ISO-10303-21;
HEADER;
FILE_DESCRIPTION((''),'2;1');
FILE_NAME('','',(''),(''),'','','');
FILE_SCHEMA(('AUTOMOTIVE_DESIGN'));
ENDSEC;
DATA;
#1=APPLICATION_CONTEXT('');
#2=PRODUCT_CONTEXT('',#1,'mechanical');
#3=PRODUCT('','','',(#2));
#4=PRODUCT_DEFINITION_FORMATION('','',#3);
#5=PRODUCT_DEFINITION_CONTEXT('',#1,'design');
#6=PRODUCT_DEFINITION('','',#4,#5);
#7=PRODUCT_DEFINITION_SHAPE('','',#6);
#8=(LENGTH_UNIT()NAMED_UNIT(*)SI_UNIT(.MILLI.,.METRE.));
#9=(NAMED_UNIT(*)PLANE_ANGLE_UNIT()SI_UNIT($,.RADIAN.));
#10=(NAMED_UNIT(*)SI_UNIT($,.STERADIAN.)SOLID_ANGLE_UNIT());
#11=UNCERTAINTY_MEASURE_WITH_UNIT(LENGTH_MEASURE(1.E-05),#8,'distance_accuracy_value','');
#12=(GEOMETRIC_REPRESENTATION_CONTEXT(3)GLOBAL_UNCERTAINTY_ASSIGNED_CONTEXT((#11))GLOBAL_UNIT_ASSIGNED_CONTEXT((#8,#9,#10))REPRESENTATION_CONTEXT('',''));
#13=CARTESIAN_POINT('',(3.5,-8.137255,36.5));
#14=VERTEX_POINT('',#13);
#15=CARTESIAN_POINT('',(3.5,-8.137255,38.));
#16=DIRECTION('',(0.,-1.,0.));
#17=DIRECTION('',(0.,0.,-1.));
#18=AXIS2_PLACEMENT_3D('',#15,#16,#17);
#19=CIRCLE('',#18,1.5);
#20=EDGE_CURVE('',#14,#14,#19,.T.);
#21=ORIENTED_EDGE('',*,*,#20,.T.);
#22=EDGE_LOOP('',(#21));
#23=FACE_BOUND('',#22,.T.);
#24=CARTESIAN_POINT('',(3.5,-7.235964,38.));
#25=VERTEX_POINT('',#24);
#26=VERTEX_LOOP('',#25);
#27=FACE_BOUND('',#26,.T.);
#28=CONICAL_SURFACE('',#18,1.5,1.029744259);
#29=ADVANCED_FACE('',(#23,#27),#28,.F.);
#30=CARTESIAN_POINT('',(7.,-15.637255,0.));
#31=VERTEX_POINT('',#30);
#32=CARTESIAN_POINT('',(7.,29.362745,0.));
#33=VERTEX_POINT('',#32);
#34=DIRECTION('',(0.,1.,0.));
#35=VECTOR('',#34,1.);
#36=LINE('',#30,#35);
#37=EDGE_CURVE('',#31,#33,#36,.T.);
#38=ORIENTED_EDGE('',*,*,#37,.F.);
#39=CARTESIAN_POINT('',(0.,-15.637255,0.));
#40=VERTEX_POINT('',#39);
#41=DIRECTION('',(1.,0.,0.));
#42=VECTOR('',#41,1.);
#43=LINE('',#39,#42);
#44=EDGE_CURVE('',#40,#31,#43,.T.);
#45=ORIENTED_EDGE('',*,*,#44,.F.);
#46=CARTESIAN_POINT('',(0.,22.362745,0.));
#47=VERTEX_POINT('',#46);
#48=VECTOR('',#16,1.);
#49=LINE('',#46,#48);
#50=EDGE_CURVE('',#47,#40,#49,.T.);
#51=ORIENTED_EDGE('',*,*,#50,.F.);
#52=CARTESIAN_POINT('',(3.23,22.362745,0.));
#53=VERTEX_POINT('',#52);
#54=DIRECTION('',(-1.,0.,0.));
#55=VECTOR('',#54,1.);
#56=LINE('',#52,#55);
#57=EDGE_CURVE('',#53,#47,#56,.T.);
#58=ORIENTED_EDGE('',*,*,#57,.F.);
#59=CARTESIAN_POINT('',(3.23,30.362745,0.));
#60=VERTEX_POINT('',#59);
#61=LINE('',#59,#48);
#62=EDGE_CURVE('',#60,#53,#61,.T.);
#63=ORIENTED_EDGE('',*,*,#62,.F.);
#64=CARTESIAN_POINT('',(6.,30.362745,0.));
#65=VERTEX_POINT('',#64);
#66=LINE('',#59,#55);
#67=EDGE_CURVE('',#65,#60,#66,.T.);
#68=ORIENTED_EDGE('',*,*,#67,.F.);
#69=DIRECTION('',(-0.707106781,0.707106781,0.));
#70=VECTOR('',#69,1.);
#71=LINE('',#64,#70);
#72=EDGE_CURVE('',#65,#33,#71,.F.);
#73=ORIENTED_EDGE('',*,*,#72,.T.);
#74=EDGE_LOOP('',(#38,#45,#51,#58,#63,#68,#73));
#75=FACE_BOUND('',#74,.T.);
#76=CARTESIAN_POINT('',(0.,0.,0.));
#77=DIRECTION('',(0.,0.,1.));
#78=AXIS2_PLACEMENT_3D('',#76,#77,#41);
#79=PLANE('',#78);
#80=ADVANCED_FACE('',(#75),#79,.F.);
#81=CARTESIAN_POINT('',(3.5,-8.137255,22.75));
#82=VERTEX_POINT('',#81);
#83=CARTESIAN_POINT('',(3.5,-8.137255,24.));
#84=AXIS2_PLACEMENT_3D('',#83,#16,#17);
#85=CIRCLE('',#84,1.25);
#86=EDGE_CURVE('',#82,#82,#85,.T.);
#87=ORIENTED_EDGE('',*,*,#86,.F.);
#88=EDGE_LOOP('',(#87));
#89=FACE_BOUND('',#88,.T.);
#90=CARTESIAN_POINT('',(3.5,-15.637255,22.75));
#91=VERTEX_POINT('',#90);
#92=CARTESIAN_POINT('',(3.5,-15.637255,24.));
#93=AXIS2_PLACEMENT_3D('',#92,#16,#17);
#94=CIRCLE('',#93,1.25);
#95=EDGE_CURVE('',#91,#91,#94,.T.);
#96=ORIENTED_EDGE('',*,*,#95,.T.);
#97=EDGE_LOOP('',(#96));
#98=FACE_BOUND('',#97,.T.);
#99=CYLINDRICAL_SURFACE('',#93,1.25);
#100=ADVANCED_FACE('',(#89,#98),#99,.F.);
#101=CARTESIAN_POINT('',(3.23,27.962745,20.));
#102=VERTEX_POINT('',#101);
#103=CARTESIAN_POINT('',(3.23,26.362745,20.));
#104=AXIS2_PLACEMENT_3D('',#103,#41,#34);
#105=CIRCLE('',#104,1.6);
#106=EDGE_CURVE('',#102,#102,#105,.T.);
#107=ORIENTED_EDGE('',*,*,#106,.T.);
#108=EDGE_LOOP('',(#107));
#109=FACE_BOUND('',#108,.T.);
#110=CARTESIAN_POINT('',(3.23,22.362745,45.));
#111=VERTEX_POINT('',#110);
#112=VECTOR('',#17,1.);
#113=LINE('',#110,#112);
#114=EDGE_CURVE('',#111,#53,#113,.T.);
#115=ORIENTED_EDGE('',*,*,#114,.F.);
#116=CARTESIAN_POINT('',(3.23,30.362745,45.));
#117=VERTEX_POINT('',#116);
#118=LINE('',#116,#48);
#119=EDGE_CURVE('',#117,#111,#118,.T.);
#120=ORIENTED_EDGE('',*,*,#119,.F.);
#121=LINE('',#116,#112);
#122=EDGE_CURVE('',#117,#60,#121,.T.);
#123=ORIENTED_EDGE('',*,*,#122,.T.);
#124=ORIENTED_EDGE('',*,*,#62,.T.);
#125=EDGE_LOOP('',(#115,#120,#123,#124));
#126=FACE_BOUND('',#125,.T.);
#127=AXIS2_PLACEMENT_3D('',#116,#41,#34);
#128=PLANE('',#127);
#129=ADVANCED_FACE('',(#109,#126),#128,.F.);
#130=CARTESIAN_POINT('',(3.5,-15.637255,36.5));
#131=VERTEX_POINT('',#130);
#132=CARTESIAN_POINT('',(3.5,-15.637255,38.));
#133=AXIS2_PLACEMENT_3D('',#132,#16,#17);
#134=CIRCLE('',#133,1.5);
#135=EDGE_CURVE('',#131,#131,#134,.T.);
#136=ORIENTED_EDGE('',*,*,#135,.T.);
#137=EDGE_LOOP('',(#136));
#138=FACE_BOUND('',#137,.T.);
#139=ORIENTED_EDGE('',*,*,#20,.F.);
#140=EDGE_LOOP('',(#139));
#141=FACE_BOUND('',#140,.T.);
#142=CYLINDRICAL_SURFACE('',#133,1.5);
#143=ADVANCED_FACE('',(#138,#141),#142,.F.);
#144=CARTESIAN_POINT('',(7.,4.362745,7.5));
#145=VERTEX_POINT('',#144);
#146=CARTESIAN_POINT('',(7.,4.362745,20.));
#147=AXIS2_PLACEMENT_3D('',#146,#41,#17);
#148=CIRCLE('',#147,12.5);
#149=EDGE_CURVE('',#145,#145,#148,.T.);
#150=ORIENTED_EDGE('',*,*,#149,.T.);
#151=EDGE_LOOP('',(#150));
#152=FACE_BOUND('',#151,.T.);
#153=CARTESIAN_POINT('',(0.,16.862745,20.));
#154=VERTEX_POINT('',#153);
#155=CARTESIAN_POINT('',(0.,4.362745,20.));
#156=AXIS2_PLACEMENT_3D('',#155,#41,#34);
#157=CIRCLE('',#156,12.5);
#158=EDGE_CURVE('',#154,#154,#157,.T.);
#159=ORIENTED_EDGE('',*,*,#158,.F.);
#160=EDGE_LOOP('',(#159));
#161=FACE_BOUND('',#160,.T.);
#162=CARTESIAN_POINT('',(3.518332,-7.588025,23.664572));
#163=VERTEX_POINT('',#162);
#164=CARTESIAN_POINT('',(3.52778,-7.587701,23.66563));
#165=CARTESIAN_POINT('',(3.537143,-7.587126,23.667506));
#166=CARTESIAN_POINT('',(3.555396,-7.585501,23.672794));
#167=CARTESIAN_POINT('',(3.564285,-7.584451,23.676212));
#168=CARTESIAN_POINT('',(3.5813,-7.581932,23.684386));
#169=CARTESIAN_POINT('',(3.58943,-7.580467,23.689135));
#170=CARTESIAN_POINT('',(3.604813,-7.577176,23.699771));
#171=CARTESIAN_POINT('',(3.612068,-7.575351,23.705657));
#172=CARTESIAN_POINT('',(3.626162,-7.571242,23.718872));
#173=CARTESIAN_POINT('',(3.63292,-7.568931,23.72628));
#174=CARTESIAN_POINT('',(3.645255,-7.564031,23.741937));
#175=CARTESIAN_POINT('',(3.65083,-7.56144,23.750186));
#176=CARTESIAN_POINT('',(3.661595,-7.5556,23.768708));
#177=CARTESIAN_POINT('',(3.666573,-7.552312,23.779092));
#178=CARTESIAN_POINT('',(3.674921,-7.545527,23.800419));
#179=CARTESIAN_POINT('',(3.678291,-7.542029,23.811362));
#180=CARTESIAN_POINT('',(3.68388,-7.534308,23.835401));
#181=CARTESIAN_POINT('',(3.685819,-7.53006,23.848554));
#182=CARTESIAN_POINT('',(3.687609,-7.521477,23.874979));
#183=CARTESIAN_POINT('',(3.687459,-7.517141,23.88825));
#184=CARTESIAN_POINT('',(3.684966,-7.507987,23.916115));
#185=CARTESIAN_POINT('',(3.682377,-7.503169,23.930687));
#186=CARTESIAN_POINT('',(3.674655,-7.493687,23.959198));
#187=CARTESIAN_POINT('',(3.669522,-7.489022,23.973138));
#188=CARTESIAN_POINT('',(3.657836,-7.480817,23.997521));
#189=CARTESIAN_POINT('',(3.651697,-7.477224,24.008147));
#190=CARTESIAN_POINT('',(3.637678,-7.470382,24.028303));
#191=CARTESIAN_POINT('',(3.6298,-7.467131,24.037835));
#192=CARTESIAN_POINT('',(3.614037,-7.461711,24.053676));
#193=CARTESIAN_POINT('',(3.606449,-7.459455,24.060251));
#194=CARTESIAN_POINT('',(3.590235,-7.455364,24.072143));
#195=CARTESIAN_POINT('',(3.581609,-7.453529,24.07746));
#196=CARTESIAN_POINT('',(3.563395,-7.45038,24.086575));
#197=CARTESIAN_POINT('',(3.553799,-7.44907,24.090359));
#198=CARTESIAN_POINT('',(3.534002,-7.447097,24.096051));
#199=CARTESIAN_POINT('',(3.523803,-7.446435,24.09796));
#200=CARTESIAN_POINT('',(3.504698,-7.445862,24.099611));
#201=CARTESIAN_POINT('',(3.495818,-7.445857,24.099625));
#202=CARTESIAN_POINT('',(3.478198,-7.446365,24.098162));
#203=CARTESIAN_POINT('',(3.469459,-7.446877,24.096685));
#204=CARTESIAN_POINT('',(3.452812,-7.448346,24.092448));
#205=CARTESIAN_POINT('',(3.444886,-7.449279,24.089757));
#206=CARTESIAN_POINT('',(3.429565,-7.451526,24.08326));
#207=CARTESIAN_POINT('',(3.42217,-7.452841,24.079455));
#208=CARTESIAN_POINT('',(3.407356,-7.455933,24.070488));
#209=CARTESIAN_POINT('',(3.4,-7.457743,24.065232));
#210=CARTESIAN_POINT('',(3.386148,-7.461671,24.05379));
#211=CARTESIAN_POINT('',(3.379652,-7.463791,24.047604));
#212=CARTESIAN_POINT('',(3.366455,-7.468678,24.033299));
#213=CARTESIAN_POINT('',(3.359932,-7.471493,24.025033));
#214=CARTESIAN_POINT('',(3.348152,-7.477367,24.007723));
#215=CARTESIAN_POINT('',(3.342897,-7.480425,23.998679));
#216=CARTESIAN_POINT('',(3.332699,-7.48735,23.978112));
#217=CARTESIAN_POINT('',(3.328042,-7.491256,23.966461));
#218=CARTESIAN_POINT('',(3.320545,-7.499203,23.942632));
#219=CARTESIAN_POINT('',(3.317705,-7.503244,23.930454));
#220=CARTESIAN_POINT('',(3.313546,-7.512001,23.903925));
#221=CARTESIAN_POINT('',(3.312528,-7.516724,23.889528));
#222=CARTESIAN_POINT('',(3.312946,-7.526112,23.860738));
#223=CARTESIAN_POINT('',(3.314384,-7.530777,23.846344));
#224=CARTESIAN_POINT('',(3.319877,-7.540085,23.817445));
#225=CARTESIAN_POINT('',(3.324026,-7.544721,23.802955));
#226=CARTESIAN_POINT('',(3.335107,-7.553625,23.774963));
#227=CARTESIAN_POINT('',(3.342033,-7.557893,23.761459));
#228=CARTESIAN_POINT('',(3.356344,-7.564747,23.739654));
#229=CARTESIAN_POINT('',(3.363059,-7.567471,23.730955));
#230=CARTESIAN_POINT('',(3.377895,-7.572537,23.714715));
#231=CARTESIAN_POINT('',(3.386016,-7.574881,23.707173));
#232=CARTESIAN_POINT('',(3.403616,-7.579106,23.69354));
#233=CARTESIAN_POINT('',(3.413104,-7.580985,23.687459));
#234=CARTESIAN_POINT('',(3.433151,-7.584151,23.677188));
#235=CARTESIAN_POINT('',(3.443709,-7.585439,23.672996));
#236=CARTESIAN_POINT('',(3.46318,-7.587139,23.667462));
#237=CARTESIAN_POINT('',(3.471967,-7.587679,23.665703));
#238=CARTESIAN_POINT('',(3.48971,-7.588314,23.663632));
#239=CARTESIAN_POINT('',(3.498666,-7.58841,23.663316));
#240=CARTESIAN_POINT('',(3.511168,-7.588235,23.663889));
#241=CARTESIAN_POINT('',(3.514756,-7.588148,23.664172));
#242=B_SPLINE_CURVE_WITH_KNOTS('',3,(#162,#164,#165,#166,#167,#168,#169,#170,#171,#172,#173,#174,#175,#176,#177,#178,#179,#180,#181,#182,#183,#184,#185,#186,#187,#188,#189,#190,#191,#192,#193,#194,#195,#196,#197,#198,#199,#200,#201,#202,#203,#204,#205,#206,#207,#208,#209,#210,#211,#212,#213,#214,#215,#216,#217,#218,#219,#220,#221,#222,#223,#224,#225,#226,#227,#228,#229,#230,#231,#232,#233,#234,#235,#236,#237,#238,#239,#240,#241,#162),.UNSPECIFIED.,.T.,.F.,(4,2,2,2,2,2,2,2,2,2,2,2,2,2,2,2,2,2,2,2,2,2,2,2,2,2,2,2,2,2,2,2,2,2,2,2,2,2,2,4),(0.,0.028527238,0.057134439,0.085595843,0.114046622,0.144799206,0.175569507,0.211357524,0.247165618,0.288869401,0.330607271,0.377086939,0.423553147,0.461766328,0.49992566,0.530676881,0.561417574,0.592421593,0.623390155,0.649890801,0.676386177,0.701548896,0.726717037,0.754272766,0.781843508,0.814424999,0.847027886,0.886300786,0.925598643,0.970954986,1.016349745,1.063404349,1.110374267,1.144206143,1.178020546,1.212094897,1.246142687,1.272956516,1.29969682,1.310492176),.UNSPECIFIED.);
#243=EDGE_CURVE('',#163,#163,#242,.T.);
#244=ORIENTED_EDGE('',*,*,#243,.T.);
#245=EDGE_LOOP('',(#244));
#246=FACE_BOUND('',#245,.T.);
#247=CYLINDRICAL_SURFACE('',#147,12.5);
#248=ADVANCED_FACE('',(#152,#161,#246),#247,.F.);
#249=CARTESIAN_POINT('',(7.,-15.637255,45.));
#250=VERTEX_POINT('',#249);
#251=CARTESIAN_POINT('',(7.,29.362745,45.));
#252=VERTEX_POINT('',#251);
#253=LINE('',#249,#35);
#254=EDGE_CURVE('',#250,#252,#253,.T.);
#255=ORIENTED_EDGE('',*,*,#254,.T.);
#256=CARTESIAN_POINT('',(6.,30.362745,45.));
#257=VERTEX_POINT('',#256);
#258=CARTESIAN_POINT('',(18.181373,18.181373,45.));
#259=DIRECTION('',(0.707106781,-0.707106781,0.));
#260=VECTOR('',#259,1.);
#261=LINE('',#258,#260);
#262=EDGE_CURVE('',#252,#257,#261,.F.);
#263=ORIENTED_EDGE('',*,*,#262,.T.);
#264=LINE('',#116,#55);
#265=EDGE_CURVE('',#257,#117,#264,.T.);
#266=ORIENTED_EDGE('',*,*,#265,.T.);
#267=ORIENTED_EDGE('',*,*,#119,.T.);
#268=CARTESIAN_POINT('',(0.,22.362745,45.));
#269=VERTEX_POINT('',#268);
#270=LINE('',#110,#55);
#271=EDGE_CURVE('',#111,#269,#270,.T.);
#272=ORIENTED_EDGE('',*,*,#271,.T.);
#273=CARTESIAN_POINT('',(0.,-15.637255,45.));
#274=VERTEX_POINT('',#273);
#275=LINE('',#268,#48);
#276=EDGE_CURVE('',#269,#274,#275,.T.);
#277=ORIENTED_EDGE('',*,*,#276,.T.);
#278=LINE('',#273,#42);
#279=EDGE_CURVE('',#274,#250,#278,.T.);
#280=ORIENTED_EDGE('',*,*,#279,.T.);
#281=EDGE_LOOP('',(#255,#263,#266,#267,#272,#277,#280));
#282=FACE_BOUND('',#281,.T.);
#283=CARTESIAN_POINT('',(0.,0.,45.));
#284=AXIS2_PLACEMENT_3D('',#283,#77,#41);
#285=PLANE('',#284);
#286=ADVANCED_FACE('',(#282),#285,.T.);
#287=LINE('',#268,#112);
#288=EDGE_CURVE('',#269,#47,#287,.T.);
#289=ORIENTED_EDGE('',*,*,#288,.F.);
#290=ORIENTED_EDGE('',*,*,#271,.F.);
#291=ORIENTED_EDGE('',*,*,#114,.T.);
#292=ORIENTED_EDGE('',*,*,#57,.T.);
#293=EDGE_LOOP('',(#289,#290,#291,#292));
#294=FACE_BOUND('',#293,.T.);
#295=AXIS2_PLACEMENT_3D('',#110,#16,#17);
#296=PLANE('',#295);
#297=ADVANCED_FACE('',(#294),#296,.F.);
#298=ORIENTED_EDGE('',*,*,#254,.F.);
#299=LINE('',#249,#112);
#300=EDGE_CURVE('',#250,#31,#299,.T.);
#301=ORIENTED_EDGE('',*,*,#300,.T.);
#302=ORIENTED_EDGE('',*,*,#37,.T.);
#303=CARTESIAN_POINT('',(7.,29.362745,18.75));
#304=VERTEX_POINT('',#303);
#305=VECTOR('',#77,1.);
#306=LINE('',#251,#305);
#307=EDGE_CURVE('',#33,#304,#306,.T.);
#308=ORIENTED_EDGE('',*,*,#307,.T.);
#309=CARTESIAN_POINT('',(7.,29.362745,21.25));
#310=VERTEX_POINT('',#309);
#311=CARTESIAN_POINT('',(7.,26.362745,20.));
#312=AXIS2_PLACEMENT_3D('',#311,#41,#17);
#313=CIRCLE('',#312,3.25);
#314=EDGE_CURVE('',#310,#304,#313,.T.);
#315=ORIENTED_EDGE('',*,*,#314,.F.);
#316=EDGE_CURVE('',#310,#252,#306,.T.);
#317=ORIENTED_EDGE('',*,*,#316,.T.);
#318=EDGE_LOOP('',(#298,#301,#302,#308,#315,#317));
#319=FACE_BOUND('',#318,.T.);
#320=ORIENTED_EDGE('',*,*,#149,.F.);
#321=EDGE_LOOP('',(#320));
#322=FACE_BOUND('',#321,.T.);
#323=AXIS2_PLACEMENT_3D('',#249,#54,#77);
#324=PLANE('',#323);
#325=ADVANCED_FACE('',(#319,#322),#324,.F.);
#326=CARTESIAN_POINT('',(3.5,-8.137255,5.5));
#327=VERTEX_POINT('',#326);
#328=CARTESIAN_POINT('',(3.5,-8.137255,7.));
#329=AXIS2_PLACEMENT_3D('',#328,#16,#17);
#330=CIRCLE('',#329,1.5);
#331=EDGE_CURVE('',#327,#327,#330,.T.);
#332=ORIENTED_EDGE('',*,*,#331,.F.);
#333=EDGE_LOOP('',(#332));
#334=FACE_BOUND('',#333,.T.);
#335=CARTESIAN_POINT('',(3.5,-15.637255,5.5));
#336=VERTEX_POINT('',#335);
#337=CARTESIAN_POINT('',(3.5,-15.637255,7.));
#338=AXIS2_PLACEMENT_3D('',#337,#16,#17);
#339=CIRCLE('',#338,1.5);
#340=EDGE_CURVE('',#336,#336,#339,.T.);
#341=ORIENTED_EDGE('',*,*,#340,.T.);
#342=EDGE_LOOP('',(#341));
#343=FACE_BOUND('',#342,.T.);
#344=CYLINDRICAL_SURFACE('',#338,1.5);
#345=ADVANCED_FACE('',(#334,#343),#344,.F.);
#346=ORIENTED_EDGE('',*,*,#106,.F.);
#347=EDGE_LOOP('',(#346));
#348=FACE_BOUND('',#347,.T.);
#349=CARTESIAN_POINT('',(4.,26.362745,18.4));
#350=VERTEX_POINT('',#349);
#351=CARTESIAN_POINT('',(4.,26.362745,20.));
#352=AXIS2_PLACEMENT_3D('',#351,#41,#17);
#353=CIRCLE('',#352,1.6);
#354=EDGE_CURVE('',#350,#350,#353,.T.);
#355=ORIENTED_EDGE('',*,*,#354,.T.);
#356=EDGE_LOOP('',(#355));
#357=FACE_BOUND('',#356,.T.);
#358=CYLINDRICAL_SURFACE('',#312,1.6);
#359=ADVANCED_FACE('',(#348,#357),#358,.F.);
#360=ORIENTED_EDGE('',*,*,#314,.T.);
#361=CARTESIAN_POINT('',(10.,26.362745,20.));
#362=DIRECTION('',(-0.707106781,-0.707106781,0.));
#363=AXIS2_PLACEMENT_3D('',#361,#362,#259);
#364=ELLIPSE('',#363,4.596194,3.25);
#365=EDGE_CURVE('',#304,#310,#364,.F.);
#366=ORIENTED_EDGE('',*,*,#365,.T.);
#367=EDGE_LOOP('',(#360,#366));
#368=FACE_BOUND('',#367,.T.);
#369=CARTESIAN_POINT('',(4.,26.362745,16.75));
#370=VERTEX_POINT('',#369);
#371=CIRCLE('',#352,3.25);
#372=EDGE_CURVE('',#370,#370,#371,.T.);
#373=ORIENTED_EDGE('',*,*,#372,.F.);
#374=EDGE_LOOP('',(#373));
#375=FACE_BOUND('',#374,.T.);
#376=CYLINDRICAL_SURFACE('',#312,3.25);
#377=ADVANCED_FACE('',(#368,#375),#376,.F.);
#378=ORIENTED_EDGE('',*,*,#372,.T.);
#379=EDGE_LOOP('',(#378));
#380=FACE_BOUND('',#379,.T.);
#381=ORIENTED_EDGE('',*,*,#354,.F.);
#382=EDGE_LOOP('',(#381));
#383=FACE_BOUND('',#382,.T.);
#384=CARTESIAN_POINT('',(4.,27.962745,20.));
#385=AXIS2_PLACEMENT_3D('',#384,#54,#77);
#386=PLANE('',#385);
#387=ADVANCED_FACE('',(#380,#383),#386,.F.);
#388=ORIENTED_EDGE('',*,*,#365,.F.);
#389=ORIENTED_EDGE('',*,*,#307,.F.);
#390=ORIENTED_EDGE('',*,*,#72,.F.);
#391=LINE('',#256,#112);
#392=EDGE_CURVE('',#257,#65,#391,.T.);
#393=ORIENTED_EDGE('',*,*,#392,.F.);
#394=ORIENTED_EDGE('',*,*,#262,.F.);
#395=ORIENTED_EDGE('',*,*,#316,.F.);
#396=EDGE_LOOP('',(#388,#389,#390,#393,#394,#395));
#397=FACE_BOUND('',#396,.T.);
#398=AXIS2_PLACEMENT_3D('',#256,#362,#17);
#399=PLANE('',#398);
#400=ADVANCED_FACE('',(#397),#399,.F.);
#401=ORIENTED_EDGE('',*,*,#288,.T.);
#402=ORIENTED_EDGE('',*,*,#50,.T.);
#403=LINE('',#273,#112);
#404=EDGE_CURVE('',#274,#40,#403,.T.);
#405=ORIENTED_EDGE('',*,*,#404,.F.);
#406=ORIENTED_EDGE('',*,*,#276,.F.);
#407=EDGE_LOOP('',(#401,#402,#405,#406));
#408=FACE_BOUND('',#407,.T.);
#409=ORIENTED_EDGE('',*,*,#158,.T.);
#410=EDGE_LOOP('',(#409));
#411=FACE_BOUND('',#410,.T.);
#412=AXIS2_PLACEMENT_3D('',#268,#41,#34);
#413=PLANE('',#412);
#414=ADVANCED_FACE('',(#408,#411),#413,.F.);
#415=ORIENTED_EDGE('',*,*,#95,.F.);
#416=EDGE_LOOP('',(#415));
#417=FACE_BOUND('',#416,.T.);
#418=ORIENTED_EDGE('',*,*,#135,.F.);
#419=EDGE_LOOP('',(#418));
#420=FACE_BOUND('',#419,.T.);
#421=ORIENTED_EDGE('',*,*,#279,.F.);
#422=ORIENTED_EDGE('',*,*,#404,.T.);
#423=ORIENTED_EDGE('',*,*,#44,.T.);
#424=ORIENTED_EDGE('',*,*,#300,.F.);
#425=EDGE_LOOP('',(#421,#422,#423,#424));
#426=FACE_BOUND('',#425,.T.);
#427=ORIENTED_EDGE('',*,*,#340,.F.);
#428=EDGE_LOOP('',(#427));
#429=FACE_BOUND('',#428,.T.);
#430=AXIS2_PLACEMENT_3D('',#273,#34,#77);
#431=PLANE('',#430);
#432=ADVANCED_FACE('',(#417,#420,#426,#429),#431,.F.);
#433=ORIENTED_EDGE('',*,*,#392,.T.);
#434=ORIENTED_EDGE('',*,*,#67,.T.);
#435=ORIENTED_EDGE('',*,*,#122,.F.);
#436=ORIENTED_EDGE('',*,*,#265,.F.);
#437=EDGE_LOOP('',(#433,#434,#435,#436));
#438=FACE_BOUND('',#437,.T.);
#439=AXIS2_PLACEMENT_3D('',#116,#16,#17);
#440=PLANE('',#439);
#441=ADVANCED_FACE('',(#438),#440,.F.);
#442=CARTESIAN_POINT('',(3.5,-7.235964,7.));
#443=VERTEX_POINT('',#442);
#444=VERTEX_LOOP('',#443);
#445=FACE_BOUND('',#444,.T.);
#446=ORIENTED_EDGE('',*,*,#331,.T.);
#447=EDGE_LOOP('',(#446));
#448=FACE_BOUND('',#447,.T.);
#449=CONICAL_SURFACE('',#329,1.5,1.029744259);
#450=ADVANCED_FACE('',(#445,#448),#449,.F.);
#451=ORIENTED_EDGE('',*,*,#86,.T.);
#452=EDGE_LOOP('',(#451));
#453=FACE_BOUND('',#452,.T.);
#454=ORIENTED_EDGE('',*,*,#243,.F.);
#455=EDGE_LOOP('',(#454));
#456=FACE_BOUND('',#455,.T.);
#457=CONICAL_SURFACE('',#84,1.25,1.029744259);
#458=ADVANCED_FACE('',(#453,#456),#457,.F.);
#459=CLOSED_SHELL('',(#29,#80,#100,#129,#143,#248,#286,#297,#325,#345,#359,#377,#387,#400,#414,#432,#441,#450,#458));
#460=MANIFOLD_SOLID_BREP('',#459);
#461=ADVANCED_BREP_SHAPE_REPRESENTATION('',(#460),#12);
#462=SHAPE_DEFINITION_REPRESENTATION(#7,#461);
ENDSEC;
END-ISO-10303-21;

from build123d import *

# Parameters (mm, degrees)
BOSS_EXTRUDE1_DEPTH            = 45
CBORE_FOR_M3_SHCS1_D           = 3.2
CBORE_FOR_M3_SHCS1_CBORE_D     = 6.5
CBORE_FOR_M3_SHCS1_CBORE_DEPTH = 3
F_25_0_25_DIAMETER_HOLE1_D     = 25
CHAMFER1_SIZE                  = 1
M3X0_5_TAPPED_HOLE1_D          = 2.5
M3X0_5_TAPPED_HOLE1_DEPTH      = 7.5
M3X0_5_TAPPED_HOLE1_TIP        = 0.751075774
F_3_0MM_DOWEL_HOLE1_D          = 3
F_3_0MM_DOWEL_HOLE1_DEPTH      = 7.5
F_3_0MM_DOWEL_HOLE1_TIP        = 0.901290929


with BuildPart() as part:
    # Sketch1 → Boss-Extrude1 (new body)
    with BuildSketch(Plane.XY):
        Polygon((3.23, 30.362745098), (3.23, 22.362745098), (0, 22.362745098), (0, -15.637254902), (7, -15.637254902), (7, 30.362745098), align=None)
    extrude(amount=BOSS_EXTRUDE1_DEPTH)

    # CBORE for M3 SHCS1 (through all)
    with Locations(Plane(origin=(7, 0, 0), x_dir=(0, 0, -1), z_dir=(1, 0, 0))):
        with Locations((-20, 26.362745098)):
            CounterBoreHole(CBORE_FOR_M3_SHCS1_D / 2, CBORE_FOR_M3_SHCS1_CBORE_D / 2, CBORE_FOR_M3_SHCS1_CBORE_DEPTH)

    # Ø25.0 (25) Diameter Hole1 (through all)
    with Locations(Plane(origin=(7, 0, 0), x_dir=(0, 0, -1), z_dir=(1, 0, 0))):
        with Locations((-20, 4.362745098)):
            Hole(F_25_0_25_DIAMETER_HOLE1_D / 2)

    # Chamfer1
    # the kernel refuses this chamfer: 1 mm, written as the material it takes off along each edge
    with BuildSketch(Plane(origin=(7, 30.362745098, -2.571682988), x_dir=(-0.9996219169112968, 0.027495876610585623, 0), z_dir=(0, 0, 1))) as chamfer1_piece_1:
        Polygon((CHAMFER1_SIZE * 0.999621916911, CHAMFER1_SIZE * 0.0274958766106), (-CHAMFER1_SIZE * 0.0274958766106, CHAMFER1_SIZE * 0.999621916911), (0, 0), align=None)
    extrude(amount=50.143365976, mode=Mode.SUBTRACT)

    # M3x0.5 Tapped Hole1
    with Locations(Plane(origin=(0, -15.637254902, 0), x_dir=(-1, 0, 0), z_dir=(0, -1, 0))):
        with Locations((-3.5, -24)):
            Hole(M3X0_5_TAPPED_HOLE1_D / 2, depth=M3X0_5_TAPPED_HOLE1_DEPTH)
            with Locations((0, 0, -(M3X0_5_TAPPED_HOLE1_DEPTH + M3X0_5_TAPPED_HOLE1_TIP / 2))):  # 118° drill point
                Cone(0, M3X0_5_TAPPED_HOLE1_D / 2, M3X0_5_TAPPED_HOLE1_TIP, mode=Mode.SUBTRACT)

    # Ø3.0mm Dowel Hole1
    with Locations(Plane(origin=(0, -15.637254902, 0), x_dir=(-1, 0, 0), z_dir=(0, -1, 0))):
        with Locations((-3.5, -38), (-3.5, -7)):
            Hole(F_3_0MM_DOWEL_HOLE1_D / 2, depth=F_3_0MM_DOWEL_HOLE1_DEPTH)
            with Locations((0, 0, -(F_3_0MM_DOWEL_HOLE1_DEPTH + F_3_0MM_DOWEL_HOLE1_TIP / 2))):  # 118° drill point
                Cone(0, F_3_0MM_DOWEL_HOLE1_D / 2, F_3_0MM_DOWEL_HOLE1_TIP, mode=Mode.SUBTRACT)


solid = part.part
